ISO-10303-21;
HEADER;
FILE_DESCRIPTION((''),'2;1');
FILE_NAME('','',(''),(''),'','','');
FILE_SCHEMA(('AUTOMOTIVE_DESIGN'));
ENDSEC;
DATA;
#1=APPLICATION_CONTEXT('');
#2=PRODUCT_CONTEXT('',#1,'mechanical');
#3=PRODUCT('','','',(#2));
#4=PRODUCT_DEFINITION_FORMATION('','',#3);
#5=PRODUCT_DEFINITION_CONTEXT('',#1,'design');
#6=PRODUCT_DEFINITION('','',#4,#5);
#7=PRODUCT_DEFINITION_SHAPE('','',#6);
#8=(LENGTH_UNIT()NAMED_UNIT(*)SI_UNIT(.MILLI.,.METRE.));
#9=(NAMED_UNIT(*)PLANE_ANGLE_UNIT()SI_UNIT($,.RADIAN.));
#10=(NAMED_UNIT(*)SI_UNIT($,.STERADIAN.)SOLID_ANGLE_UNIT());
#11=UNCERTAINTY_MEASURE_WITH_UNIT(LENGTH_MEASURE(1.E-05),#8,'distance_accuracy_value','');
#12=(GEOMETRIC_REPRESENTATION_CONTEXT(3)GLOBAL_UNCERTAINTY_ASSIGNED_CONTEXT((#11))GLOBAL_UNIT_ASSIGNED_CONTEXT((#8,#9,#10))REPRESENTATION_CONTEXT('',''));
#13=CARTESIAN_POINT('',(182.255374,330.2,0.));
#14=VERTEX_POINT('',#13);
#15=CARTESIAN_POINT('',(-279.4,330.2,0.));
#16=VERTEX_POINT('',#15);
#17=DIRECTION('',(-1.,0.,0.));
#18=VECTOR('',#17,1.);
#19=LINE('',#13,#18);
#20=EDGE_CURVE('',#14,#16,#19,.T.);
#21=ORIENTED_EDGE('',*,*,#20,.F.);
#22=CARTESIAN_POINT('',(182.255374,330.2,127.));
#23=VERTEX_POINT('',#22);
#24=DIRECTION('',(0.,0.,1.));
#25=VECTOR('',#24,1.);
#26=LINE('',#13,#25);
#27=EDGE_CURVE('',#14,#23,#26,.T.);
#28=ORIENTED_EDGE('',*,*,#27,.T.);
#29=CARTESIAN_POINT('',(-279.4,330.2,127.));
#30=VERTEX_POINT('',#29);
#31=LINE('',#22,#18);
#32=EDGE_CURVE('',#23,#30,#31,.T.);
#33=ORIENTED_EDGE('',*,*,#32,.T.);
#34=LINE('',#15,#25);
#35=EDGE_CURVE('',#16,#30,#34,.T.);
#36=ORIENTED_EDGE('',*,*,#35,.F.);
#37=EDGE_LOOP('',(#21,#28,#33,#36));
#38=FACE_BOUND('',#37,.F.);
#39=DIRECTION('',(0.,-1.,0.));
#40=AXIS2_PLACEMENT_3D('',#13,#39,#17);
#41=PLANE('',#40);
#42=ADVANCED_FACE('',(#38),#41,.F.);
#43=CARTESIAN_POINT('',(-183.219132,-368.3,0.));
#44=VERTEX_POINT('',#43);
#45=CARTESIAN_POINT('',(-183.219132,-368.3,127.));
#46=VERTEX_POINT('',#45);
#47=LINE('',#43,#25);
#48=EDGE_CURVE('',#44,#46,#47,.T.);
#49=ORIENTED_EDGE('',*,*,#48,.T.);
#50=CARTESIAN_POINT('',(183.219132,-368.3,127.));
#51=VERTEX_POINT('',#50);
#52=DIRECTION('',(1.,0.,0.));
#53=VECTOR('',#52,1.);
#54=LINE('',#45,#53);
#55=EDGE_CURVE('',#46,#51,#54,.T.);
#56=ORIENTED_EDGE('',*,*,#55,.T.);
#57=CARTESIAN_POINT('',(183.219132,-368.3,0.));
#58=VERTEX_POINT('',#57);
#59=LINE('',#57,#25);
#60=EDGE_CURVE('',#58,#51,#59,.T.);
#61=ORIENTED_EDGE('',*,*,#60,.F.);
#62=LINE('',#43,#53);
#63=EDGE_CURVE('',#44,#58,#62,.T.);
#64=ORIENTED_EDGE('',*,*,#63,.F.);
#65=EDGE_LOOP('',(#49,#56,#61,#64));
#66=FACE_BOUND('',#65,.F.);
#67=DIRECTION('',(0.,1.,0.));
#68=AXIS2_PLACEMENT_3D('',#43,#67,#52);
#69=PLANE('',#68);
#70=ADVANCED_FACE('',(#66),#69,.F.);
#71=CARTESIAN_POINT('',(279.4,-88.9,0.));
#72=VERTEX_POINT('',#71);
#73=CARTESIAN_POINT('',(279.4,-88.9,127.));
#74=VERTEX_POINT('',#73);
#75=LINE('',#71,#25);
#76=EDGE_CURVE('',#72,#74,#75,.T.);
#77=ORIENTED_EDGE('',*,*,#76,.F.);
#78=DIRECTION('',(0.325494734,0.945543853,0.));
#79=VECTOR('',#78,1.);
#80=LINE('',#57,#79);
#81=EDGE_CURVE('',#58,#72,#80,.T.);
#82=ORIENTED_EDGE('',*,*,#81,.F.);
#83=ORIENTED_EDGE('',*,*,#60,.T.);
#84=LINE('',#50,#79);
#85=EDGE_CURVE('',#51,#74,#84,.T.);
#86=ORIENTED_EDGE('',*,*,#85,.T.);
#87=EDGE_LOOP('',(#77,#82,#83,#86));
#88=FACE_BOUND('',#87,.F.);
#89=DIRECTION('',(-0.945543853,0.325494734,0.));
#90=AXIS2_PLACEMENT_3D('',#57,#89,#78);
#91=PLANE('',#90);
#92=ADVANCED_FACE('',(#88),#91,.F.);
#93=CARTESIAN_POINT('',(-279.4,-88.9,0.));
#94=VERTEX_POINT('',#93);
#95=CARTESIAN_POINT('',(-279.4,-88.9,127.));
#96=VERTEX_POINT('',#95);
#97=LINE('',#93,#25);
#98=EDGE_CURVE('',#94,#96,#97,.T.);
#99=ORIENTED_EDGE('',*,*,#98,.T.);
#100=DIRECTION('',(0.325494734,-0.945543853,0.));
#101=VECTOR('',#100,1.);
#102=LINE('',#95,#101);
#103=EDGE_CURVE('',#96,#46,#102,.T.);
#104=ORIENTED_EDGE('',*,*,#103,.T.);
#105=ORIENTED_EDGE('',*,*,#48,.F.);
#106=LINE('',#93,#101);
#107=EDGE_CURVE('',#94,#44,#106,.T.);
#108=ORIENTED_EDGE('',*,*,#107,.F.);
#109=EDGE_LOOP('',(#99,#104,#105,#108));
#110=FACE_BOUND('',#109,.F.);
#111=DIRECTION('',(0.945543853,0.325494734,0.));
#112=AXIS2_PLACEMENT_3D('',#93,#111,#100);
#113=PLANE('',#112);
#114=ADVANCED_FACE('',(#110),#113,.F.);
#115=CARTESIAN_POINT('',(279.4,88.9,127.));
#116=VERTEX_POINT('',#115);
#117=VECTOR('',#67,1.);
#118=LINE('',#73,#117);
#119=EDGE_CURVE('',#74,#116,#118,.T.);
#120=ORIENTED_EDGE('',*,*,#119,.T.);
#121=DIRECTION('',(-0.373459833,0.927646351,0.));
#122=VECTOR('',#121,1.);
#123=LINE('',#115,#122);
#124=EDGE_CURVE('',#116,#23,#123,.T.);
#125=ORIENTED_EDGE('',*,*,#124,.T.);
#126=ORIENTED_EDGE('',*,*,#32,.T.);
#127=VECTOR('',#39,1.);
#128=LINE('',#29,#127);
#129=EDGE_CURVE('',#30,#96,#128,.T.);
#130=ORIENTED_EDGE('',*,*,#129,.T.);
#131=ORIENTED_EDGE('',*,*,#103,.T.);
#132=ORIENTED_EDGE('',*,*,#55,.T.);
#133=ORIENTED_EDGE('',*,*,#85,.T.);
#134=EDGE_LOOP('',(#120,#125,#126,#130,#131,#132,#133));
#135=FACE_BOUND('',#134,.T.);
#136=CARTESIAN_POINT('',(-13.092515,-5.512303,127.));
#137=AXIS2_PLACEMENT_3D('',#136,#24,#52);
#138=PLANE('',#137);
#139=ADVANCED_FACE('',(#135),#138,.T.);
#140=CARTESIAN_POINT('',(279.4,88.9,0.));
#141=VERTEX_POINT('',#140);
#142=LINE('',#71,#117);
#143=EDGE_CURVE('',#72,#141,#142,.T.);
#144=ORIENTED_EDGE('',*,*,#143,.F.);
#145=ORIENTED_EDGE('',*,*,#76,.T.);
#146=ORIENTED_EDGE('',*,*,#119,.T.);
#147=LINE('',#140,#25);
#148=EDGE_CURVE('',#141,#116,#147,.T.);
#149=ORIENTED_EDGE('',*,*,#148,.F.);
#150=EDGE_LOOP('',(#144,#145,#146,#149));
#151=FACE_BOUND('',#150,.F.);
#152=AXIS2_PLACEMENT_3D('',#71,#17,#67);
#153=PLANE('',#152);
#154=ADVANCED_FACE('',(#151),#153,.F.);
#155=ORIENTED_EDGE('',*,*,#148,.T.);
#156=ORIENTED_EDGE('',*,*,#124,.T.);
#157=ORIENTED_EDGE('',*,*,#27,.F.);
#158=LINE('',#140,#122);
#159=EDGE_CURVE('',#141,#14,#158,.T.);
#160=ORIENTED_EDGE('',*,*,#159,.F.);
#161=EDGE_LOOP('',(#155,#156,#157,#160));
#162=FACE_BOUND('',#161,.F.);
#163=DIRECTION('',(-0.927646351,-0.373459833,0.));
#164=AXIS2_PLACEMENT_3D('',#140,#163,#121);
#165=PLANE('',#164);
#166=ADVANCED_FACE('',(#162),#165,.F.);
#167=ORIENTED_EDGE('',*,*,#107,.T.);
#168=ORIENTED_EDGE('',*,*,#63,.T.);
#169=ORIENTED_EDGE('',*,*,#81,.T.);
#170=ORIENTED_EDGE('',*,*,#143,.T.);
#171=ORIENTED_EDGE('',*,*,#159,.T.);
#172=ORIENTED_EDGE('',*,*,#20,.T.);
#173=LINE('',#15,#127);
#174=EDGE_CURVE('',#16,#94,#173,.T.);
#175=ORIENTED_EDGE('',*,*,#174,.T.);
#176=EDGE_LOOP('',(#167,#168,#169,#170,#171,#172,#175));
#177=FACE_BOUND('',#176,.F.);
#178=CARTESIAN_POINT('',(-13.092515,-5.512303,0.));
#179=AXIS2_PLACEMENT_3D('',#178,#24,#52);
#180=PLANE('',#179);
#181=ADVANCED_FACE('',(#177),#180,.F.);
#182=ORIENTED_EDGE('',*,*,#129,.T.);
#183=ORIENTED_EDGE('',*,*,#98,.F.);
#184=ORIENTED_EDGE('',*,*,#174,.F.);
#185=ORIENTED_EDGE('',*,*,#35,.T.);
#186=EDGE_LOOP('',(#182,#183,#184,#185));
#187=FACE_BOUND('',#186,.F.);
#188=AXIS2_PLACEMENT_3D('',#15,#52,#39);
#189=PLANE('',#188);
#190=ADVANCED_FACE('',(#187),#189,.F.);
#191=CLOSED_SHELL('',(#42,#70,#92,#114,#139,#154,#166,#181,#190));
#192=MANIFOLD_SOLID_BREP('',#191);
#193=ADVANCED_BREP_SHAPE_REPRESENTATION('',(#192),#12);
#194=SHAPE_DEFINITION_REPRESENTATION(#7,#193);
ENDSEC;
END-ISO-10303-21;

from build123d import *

# Parameters (mm, degrees)
F1_DEPTH = 127


# Not quite as in the source:
# - the program builds the solid bodies; features that only make, move or delete a surface that nothing else refers to are left out


with BuildPart() as f1:
    # F0 (on Top) → F1 (new body)
    with BuildSketch(Plane.XY):
        Polygon((-183.2191318646, -368.3), (183.2191318646, -368.3), (279.4, -88.9), (279.4, 88.9), (182.2553741554, 330.2), (-279.4, 330.2), (-279.4, 88.9), (-279.4, -88.9), align=None)
    extrude(amount=F1_DEPTH)


solid = f1.part
